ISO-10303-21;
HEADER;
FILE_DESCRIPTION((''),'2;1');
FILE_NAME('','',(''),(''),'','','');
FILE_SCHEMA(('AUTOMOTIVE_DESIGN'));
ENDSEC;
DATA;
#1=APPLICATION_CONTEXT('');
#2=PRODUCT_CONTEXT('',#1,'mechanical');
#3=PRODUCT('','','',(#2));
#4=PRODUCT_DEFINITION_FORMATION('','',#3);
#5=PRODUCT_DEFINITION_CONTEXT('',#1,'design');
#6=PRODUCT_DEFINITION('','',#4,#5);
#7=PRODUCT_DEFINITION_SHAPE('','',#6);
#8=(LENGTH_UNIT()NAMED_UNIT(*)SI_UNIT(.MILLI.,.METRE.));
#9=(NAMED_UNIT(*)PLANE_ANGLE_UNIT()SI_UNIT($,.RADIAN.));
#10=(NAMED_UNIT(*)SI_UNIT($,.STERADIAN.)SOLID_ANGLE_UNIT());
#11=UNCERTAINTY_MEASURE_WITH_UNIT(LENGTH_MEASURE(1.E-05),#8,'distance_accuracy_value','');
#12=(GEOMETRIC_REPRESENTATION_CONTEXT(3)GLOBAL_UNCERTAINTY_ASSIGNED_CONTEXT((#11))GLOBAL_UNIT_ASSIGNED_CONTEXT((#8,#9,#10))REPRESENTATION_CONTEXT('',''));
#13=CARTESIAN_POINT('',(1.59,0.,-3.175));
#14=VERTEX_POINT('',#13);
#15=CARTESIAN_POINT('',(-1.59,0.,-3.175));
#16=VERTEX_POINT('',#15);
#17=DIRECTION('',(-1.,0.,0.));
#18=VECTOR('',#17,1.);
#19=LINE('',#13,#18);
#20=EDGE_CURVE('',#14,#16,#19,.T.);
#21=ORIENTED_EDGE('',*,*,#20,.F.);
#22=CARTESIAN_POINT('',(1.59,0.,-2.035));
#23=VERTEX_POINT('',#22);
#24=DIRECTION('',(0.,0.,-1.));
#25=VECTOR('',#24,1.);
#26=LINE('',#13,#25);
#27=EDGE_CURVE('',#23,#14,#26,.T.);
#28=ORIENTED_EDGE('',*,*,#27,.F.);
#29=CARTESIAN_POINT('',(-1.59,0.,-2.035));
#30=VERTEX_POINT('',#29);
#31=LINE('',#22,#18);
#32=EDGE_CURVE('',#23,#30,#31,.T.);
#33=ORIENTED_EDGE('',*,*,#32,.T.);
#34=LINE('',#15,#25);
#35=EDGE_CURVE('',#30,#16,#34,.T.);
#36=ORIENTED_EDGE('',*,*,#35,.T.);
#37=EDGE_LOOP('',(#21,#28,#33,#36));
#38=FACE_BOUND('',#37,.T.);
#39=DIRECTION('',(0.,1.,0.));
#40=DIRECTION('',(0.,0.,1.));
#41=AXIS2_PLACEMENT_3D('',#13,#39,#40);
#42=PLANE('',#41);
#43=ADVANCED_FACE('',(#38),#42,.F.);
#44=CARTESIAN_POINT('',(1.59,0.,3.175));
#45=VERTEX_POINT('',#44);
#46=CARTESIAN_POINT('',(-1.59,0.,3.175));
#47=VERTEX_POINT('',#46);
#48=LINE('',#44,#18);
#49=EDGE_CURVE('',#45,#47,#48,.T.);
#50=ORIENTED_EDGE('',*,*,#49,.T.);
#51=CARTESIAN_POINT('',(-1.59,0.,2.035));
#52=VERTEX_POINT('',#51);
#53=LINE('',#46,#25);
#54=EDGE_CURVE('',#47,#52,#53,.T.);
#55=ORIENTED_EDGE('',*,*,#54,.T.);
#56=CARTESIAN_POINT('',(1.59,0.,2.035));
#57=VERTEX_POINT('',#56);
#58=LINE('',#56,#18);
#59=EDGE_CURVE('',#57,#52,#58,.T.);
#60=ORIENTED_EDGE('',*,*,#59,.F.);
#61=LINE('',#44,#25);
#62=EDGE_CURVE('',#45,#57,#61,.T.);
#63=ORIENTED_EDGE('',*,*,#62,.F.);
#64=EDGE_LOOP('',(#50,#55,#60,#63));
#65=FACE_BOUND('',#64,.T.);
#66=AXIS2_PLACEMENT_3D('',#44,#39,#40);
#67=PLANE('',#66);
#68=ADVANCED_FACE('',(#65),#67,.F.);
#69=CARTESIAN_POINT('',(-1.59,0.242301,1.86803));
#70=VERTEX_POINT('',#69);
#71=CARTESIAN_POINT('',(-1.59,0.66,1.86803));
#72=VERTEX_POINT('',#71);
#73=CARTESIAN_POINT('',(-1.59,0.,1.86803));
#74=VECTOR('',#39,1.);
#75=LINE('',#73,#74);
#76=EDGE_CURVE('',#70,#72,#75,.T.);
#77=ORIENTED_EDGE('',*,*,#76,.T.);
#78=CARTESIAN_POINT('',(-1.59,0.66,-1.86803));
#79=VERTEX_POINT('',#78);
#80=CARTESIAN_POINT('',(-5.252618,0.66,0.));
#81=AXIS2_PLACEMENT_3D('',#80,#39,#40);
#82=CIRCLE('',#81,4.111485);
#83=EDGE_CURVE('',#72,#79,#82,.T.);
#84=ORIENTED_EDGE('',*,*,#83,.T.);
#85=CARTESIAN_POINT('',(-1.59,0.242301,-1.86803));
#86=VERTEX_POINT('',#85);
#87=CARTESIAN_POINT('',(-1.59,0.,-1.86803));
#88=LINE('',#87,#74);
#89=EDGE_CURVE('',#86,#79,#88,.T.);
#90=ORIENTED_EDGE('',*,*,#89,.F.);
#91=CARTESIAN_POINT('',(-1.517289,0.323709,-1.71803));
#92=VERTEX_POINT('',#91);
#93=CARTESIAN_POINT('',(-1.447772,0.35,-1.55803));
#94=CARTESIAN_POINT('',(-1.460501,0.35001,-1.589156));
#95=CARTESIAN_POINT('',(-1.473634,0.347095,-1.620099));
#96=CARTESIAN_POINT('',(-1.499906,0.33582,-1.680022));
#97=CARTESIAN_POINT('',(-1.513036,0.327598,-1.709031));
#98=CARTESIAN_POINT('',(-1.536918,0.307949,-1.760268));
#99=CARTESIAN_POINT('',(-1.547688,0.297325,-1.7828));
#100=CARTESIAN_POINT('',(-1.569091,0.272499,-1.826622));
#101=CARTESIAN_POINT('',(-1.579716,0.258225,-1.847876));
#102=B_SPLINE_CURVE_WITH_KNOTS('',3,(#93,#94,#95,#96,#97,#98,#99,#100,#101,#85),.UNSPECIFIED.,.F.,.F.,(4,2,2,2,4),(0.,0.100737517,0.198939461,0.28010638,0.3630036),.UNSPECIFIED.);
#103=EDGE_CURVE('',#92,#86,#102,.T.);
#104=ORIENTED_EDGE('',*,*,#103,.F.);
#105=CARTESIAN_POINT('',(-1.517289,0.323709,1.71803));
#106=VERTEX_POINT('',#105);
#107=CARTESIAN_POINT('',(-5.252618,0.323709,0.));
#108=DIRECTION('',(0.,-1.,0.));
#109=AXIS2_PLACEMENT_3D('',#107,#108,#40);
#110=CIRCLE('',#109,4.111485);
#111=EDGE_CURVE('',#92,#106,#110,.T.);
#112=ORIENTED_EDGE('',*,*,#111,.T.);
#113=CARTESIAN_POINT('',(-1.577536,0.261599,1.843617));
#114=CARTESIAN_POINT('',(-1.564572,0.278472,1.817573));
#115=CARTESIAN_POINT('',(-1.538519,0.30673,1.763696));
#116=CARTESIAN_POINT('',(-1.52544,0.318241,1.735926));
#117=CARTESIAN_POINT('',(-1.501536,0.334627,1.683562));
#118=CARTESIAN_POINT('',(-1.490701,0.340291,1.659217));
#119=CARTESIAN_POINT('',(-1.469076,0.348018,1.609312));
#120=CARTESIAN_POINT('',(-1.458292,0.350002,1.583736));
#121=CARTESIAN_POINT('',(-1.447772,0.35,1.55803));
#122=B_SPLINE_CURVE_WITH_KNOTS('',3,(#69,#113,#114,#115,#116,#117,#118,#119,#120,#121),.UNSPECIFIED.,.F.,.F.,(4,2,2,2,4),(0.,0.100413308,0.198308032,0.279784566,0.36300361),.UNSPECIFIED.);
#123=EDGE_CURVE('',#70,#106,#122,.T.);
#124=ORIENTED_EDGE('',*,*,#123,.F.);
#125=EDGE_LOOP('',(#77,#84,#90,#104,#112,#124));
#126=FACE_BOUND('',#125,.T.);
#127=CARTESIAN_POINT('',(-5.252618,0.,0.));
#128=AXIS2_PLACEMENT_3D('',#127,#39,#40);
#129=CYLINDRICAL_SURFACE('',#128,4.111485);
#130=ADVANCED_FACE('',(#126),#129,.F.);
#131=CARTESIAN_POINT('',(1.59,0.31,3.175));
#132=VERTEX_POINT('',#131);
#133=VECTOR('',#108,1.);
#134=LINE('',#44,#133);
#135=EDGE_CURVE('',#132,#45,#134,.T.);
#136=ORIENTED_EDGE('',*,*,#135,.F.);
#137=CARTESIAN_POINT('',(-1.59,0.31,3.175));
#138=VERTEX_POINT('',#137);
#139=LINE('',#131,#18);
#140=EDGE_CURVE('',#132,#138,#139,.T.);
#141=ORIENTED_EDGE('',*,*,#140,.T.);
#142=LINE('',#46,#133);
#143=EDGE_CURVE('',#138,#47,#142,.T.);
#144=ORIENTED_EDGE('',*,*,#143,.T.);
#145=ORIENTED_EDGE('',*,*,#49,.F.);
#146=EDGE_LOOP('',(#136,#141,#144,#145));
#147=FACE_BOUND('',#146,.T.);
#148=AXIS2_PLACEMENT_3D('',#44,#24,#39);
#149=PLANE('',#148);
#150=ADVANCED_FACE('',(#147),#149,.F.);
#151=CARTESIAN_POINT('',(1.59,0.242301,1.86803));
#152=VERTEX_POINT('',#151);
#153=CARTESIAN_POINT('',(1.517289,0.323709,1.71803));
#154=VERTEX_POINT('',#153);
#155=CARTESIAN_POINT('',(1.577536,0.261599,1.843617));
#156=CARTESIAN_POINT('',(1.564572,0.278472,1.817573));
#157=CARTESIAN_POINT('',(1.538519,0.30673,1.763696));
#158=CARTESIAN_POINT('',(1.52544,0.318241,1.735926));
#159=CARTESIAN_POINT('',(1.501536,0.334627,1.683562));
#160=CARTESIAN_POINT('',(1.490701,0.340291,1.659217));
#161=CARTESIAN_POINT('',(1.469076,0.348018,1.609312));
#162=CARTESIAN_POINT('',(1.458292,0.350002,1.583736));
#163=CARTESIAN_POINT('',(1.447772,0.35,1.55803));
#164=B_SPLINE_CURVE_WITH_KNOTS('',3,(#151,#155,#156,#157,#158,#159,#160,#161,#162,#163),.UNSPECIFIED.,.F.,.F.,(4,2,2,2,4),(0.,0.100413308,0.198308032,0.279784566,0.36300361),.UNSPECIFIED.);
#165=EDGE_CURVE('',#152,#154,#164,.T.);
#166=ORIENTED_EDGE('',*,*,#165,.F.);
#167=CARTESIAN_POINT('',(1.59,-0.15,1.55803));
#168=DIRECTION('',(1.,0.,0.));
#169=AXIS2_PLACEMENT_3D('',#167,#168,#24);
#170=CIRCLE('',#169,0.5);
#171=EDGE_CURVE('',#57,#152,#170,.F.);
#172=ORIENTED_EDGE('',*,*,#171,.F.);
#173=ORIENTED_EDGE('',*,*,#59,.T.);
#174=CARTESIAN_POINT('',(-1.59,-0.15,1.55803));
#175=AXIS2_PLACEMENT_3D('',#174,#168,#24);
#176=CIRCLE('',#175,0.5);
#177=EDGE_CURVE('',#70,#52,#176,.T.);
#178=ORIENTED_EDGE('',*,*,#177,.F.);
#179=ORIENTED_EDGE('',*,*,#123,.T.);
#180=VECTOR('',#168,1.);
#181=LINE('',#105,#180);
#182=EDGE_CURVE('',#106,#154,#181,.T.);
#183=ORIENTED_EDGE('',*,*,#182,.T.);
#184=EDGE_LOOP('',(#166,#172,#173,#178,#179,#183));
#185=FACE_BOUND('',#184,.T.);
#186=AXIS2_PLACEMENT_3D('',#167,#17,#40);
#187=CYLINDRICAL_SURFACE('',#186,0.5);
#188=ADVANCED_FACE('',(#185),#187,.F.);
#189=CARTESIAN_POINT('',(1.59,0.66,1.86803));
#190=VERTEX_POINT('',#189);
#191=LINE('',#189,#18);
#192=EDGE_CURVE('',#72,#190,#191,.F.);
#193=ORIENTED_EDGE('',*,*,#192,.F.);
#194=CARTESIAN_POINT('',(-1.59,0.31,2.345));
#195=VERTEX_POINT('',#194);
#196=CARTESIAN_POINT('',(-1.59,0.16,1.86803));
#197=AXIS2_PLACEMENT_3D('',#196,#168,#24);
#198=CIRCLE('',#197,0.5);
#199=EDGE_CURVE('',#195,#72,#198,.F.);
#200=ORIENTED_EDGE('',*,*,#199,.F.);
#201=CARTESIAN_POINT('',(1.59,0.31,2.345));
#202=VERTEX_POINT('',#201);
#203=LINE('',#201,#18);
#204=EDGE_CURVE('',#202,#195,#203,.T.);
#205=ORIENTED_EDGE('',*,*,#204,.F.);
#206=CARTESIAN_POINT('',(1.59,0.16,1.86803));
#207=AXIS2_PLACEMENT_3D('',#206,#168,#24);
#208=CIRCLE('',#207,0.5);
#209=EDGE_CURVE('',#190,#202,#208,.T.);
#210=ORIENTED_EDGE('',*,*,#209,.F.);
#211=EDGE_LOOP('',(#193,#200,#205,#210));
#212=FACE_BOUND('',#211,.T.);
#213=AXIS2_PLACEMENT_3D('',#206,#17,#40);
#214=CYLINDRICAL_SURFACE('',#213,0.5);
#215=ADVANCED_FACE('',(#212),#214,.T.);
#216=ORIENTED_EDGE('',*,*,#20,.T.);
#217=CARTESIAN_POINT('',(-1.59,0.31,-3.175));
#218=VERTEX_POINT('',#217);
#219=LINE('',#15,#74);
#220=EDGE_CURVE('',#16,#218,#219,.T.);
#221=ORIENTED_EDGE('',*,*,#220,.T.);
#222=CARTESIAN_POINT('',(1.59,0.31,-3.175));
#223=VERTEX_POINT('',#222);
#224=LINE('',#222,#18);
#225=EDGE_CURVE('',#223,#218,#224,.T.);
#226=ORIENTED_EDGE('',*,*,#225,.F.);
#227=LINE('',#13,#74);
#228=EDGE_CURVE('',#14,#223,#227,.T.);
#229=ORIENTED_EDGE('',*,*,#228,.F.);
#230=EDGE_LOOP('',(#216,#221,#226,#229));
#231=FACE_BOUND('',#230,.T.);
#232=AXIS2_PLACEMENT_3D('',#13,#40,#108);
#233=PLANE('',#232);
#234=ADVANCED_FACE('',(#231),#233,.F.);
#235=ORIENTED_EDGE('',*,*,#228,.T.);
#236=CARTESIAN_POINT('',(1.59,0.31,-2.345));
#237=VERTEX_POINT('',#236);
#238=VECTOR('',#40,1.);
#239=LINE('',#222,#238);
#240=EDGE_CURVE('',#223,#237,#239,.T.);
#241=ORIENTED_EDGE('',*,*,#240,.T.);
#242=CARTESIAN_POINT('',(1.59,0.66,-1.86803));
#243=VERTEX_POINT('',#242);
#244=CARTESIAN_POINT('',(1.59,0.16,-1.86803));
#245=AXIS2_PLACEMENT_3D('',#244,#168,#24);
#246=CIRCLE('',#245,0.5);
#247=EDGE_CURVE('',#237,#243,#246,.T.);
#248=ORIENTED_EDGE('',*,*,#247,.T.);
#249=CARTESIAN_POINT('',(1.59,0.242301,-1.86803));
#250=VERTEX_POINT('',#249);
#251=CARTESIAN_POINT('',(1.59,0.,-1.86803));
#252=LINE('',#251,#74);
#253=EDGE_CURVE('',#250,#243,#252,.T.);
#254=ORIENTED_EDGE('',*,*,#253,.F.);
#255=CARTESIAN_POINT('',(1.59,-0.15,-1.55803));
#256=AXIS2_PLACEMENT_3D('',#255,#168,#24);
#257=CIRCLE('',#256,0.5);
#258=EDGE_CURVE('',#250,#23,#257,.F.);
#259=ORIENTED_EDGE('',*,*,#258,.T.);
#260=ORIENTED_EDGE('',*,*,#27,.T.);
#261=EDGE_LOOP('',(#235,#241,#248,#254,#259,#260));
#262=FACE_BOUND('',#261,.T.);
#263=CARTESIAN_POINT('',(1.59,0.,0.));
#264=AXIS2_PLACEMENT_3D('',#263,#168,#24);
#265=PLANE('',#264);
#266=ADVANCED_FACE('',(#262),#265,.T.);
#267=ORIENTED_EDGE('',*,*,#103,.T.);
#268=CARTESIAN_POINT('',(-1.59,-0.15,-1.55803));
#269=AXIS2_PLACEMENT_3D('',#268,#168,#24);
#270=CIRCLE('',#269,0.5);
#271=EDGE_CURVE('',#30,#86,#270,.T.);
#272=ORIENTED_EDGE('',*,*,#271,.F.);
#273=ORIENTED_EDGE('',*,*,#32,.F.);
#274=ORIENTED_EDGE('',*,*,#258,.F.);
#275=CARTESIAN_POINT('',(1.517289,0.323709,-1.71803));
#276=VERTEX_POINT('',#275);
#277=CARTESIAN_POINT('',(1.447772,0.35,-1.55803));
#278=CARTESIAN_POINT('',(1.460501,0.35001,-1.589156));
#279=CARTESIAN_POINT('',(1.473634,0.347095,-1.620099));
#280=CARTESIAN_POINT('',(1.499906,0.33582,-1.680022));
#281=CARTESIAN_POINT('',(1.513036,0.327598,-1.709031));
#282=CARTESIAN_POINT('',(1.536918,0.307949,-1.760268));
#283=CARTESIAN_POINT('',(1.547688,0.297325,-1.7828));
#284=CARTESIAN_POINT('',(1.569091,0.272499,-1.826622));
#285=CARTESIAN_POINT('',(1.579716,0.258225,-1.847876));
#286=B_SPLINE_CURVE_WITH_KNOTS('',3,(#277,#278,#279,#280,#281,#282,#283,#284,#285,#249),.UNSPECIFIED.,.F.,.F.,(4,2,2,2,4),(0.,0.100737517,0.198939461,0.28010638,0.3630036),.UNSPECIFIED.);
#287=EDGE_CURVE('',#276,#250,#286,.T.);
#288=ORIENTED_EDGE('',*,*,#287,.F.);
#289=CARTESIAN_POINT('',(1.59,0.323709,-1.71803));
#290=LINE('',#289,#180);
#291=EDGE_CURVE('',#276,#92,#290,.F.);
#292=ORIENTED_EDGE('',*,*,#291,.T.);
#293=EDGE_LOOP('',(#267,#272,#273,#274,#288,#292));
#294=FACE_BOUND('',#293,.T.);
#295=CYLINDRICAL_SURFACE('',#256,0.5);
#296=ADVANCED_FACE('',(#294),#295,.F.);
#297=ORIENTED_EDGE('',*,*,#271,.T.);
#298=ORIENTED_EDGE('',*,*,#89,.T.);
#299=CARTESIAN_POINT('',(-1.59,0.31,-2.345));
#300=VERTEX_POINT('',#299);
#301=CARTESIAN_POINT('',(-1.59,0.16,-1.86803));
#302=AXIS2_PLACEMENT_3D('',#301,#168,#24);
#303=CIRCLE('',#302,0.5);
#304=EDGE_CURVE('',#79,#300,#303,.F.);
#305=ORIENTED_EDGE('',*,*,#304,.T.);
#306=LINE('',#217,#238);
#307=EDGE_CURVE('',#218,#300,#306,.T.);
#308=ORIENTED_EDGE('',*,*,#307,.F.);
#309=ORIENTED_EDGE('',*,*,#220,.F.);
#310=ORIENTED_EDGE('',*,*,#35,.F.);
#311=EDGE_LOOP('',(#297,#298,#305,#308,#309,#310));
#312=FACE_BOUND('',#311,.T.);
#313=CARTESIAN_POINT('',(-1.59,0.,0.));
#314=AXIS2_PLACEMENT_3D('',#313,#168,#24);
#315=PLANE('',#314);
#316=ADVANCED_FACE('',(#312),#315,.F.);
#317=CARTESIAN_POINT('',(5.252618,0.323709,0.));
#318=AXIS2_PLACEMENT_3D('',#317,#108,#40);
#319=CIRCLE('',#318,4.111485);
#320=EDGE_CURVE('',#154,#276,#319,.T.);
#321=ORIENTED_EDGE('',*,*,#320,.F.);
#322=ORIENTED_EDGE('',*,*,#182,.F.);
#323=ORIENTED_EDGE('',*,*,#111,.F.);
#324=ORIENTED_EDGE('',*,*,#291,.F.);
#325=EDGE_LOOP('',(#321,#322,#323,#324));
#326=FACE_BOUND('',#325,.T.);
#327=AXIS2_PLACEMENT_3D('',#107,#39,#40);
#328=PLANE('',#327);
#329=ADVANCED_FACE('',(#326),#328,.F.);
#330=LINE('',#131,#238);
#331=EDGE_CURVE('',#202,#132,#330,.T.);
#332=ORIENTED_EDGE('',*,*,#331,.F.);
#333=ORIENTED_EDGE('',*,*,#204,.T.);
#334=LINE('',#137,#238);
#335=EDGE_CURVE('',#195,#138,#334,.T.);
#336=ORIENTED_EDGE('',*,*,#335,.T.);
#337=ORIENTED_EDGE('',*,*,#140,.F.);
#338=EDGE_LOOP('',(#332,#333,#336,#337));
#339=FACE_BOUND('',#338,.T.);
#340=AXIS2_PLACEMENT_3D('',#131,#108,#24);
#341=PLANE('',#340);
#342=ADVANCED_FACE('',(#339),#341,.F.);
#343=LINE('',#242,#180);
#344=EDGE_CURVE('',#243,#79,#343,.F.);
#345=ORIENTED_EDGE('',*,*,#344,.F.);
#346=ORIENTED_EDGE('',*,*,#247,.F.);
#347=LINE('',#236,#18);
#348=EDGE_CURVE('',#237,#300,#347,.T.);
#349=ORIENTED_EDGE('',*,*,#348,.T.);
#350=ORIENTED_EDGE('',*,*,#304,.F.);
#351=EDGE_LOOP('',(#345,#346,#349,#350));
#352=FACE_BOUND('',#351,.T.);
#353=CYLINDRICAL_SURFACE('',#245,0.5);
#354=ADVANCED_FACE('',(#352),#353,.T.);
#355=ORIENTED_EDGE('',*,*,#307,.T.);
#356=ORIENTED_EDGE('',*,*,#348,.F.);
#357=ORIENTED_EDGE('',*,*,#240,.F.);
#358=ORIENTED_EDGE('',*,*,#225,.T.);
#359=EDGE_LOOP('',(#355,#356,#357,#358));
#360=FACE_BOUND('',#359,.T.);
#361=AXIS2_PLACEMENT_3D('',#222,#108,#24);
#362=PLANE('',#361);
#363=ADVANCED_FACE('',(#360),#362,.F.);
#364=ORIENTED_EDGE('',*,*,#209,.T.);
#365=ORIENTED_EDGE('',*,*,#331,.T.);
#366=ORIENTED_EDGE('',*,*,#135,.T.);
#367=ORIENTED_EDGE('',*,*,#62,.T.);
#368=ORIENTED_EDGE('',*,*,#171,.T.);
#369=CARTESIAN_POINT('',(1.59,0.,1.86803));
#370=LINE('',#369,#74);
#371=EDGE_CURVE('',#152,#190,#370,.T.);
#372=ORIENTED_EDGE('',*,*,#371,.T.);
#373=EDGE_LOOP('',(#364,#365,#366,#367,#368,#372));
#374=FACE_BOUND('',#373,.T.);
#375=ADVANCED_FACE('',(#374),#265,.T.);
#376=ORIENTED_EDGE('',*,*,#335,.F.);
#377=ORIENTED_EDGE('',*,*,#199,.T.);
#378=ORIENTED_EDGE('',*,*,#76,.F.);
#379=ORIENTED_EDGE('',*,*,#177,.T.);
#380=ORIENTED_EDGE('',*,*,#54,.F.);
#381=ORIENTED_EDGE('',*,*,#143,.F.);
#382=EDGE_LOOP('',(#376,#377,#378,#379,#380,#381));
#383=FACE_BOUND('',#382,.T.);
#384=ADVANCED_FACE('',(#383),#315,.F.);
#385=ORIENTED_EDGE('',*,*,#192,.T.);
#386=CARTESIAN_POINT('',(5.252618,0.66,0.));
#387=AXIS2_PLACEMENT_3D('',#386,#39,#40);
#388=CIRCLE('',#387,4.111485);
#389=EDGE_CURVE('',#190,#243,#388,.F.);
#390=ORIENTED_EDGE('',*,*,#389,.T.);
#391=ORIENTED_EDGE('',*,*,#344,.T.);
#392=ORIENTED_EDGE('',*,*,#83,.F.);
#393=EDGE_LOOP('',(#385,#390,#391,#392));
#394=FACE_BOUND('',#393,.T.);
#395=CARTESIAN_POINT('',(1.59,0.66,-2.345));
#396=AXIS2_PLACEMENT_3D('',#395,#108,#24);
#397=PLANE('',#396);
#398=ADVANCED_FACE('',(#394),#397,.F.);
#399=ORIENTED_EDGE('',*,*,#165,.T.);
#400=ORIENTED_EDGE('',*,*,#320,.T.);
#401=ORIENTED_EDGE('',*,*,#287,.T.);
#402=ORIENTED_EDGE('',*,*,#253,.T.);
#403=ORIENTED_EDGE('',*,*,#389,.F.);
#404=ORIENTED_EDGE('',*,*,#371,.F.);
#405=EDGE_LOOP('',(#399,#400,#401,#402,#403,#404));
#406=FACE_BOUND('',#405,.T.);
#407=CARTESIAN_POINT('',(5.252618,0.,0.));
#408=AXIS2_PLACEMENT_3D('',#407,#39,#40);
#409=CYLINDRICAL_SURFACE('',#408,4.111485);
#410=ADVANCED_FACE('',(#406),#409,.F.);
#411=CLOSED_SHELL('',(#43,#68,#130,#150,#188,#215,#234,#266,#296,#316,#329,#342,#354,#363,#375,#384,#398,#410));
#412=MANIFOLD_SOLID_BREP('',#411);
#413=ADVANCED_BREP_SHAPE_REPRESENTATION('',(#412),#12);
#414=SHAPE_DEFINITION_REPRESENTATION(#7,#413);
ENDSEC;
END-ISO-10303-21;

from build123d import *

# Parameters (mm, degrees)
BOSS_EXTRUDE1_DEPTH     = 1.59
FILLET1_START           = -1.59
FILLET1_DEPTH           = 3.18
FILLET1_2_DEPTH         = 3.18
CUT_EXTRUDE1_DEPTH      = 4.611692816
CUT_EXTRUDE2_DEPTH      = 4.611692879
CUT_EXTRUDE2_DEPTH_BACK = 4.611692879
BOSS_EXTRUDE2_START     = -0.336291
BOSS_EXTRUDE2_DEPTH     = 0.336291


with BuildPart() as part:
    # Sketch1 → Boss-Extrude1 (new, symmetric)
    with BuildSketch(Plane(origin=(0, 0, 0), x_dir=(0, 0, -1), z_dir=(1, 0, 0))):
        Polygon((3.175, 0), (2.035, 0), (2.035, 0.35), (-2.035, 0.35), (-2.035, 0), (-3.175, 0), (-3.175, 0.31), (-2.345, 0.31), (-2.345, 0.66), (2.345, 0.66), (2.345, 0.31), (3.175, 0.31), align=None)
    extrude(amount=BOSS_EXTRUDE1_DEPTH, both=True)

    # Fillet1: read off the stored shape, not the designer's step
    # Fillet1 outline → Fillet1 (cut)
    with BuildSketch(Plane.YZ.offset(FILLET1_START)):
        with BuildLine():
            ThreePointArc((0.31, 2.345), (0.563112887, 2.163834388), (0.66, 1.868030399))
            Line((0.66, 1.868030399), (0.66, 2.345))
            Line((0.66, 2.345), (0.31, 2.345))
        make_face()
        with BuildLine():
            ThreePointArc((0.66, -1.868030399), (0.563112887, -2.163834388), (0.31, -2.345))
            Line((0.31, -2.345), (0.66, -2.345))
            Line((0.66, -2.345), (0.66, -1.868030399))
        make_face()
    extrude(amount=FILLET1_DEPTH, mode=Mode.SUBTRACT)

    # Fillet1 2 outline → Fillet1 2 (add)
    with BuildSketch(Plane.YZ.offset(FILLET1_START)):
        with BuildLine():
            Line((0.35, 2.035), (0, 2.035))
            ThreePointArc((0, 2.035), (0.253112887, 1.853834388), (0.35, 1.558030399))
            Line((0.35, 1.558030399), (0.35, 2.035))
        make_face()
        with BuildLine():
            Line((0.35, -2.035), (0.35, -1.558030399))
            ThreePointArc((0.35, -1.558030399), (0.253112887, -1.853834388), (0, -2.035))
            Line((0, -2.035), (0.35, -2.035))
        make_face()
    extrude(amount=FILLET1_2_DEPTH)

    # Sketch3 → Cut-Extrude1 (cut, symmetric)
    with BuildSketch(Plane(origin=(0, 0.66, 0), x_dir=(1, 0, 0), z_dir=(0, 1, 0))):
        with BuildLine():
            Line((-1.59, -1.868030399), (-1.59, 1.868030399))
            ThreePointArc((-1.59, 1.868030399), (-1.14113305, 0), (-1.59, -1.868030399))
        make_face()
    cut_extrude1 = extrude(amount=CUT_EXTRUDE1_DEPTH, both=True, mode=Mode.SUBTRACT)

    # Mirror1: Cut-Extrude1 across plane
    add(cut_extrude1.mirror(Plane(origin=(0, 0, 0), x_dir=(0, 0, 1), z_dir=(1, 0, 0))), mode=Mode.SUBTRACT)

    # Sketch4 → Cut-Extrude2 (cut, two sides: drawn at the far end of the back side and taken through both)
    with BuildSketch(Plane(origin=(0, 0.66, 0), x_dir=(1, 0, 0), z_dir=(0, 1, 0)).offset(-CUT_EXTRUDE2_DEPTH_BACK)):
        with BuildLine():
            Line((-1.517289395, -1.718030399), (1.517289395, -1.718030399))
            ThreePointArc((1.517289395, -1.718030399), (1.14113305, 0), (1.517289395, 1.718030399))
            Line((1.517289395, 1.718030399), (-1.517289395, 1.718030399))
            ThreePointArc((-1.517289395, 1.718030399), (-1.14113305, 0), (-1.517289395, -1.718030399))
        make_face()
    extrude(amount=CUT_EXTRUDE2_DEPTH + CUT_EXTRUDE2_DEPTH_BACK, mode=Mode.SUBTRACT)


with BuildPart() as cut_extrude2_piece_1:
    # of the separate pieces the step leaves, piece 1, a body of its own (cut_extrude2_pieces)
    add(part.part.solids().sort_by_distance((-1.59, 0, -3.175))[0])



with BuildPart() as cut_extrude2_piece_2:
    # of the separate pieces the step leaves, piece 2, a body of its own (cut_extrude2_pieces)
    add(part.part.solids().sort_by_distance((-1.59, 0.66, 1.868030399))[0])


with BuildPart() as cut_extrude2_piece_1_1:
    add(cut_extrude2_piece_1.part)

    add(cut_extrude2_piece_2.part)  # Boss-Extrude2 merges Cut-Extrude2 piece 2
    # Sketch4<2> → Boss-Extrude2 (add)
    with BuildSketch(Plane(origin=(0, 0.66, 0), x_dir=(1, 0, 0), z_dir=(0, 1, 0)).offset(BOSS_EXTRUDE2_START)):
        with BuildLine():
            Line((-1.517289395, -1.718030399), (1.517289395, -1.718030399))
            ThreePointArc((1.517289395, -1.718030399), (1.14113305, 0), (1.517289395, 1.718030399))
            Line((1.517289395, 1.718030399), (-1.517289395, 1.718030399))
            ThreePointArc((-1.517289395, 1.718030399), (-1.14113305, 0), (-1.517289395, -1.718030399))
        make_face()
    extrude(amount=BOSS_EXTRUDE2_DEPTH)


solid = cut_extrude2_piece_1_1.part
